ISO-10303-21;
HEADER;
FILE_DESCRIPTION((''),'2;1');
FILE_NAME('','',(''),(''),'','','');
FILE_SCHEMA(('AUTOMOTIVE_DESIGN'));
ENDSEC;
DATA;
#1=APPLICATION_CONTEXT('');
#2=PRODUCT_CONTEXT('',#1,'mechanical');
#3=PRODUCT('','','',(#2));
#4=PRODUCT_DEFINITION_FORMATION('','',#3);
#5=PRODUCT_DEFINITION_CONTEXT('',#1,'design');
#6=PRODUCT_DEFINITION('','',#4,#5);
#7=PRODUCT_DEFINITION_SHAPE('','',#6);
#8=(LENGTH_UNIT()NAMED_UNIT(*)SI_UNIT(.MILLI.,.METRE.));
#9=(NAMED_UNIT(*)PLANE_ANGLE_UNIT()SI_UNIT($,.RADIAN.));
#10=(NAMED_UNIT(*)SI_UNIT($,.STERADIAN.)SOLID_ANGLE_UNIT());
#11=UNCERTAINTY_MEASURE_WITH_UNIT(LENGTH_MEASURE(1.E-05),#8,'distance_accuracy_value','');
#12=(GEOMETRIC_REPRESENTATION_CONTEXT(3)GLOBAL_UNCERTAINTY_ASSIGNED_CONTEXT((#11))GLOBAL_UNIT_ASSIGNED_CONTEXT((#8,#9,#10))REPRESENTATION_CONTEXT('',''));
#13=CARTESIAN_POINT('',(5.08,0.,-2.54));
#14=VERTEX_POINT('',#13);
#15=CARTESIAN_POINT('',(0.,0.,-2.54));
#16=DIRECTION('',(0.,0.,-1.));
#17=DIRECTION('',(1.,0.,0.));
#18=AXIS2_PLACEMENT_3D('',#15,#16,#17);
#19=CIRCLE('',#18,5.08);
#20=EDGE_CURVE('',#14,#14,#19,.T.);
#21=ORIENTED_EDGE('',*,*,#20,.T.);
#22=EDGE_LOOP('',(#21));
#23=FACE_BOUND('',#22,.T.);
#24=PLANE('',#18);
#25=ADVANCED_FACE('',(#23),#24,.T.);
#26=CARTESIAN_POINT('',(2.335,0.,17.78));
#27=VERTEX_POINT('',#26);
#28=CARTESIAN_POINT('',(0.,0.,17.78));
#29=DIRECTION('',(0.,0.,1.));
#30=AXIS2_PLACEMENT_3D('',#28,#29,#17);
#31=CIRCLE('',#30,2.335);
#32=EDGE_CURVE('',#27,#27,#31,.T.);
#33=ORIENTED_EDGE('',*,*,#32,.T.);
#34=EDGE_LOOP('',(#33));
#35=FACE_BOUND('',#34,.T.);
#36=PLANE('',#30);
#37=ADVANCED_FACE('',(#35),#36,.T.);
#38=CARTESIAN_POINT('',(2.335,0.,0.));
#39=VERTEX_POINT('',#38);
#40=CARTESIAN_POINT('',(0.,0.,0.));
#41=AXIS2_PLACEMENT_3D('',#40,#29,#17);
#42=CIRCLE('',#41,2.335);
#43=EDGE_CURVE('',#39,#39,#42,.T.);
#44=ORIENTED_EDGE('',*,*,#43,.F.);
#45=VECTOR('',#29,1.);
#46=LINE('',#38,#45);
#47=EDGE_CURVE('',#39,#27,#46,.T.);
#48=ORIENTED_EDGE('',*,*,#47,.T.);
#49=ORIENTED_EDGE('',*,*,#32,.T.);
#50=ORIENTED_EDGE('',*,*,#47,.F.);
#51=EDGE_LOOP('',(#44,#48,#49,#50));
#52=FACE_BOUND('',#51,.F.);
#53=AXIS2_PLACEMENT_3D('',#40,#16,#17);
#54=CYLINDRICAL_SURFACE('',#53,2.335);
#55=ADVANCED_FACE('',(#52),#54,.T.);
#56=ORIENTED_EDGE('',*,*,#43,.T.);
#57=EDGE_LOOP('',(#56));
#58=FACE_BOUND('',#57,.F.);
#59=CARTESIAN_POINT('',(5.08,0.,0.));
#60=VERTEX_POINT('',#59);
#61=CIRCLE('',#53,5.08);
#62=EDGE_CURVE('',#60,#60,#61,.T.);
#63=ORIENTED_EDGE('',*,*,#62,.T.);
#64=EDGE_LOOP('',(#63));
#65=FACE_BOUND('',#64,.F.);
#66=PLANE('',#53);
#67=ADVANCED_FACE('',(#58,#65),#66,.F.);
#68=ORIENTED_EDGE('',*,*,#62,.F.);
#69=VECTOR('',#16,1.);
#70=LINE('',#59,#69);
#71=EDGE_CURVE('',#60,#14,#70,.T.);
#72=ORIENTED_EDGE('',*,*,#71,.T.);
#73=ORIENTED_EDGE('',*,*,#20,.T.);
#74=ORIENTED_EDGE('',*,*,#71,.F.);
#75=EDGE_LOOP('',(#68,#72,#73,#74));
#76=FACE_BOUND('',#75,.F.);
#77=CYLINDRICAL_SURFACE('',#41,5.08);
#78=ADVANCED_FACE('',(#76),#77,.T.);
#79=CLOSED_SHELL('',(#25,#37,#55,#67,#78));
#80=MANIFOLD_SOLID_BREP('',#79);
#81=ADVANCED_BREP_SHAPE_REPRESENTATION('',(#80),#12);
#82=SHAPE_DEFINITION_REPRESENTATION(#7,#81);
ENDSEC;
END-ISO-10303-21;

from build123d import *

# Parameters (mm, degrees)
F0_R     = 2.335
F1_DEPTH = 17.78
F2_R     = 5.08
F2_R_2   = 2.335
F3_DEPTH = 2.54


with BuildPart() as f1:
    # F0 (on Top) → F1 (new body)
    with BuildSketch(Plane.XY):
        Circle(F0_R)
    extrude(amount=F1_DEPTH)

    # F2 (on face) → F3 (join)
    with BuildSketch(Plane(origin=(0, 0, 0), x_dir=(1, 0, 0), z_dir=(0, 0, -1))):
        Circle(F2_R)
        Circle(F2_R_2, mode=Mode.SUBTRACT)
        Circle(F2_R_2)
    extrude(amount=F3_DEPTH)


solid = f1.part
